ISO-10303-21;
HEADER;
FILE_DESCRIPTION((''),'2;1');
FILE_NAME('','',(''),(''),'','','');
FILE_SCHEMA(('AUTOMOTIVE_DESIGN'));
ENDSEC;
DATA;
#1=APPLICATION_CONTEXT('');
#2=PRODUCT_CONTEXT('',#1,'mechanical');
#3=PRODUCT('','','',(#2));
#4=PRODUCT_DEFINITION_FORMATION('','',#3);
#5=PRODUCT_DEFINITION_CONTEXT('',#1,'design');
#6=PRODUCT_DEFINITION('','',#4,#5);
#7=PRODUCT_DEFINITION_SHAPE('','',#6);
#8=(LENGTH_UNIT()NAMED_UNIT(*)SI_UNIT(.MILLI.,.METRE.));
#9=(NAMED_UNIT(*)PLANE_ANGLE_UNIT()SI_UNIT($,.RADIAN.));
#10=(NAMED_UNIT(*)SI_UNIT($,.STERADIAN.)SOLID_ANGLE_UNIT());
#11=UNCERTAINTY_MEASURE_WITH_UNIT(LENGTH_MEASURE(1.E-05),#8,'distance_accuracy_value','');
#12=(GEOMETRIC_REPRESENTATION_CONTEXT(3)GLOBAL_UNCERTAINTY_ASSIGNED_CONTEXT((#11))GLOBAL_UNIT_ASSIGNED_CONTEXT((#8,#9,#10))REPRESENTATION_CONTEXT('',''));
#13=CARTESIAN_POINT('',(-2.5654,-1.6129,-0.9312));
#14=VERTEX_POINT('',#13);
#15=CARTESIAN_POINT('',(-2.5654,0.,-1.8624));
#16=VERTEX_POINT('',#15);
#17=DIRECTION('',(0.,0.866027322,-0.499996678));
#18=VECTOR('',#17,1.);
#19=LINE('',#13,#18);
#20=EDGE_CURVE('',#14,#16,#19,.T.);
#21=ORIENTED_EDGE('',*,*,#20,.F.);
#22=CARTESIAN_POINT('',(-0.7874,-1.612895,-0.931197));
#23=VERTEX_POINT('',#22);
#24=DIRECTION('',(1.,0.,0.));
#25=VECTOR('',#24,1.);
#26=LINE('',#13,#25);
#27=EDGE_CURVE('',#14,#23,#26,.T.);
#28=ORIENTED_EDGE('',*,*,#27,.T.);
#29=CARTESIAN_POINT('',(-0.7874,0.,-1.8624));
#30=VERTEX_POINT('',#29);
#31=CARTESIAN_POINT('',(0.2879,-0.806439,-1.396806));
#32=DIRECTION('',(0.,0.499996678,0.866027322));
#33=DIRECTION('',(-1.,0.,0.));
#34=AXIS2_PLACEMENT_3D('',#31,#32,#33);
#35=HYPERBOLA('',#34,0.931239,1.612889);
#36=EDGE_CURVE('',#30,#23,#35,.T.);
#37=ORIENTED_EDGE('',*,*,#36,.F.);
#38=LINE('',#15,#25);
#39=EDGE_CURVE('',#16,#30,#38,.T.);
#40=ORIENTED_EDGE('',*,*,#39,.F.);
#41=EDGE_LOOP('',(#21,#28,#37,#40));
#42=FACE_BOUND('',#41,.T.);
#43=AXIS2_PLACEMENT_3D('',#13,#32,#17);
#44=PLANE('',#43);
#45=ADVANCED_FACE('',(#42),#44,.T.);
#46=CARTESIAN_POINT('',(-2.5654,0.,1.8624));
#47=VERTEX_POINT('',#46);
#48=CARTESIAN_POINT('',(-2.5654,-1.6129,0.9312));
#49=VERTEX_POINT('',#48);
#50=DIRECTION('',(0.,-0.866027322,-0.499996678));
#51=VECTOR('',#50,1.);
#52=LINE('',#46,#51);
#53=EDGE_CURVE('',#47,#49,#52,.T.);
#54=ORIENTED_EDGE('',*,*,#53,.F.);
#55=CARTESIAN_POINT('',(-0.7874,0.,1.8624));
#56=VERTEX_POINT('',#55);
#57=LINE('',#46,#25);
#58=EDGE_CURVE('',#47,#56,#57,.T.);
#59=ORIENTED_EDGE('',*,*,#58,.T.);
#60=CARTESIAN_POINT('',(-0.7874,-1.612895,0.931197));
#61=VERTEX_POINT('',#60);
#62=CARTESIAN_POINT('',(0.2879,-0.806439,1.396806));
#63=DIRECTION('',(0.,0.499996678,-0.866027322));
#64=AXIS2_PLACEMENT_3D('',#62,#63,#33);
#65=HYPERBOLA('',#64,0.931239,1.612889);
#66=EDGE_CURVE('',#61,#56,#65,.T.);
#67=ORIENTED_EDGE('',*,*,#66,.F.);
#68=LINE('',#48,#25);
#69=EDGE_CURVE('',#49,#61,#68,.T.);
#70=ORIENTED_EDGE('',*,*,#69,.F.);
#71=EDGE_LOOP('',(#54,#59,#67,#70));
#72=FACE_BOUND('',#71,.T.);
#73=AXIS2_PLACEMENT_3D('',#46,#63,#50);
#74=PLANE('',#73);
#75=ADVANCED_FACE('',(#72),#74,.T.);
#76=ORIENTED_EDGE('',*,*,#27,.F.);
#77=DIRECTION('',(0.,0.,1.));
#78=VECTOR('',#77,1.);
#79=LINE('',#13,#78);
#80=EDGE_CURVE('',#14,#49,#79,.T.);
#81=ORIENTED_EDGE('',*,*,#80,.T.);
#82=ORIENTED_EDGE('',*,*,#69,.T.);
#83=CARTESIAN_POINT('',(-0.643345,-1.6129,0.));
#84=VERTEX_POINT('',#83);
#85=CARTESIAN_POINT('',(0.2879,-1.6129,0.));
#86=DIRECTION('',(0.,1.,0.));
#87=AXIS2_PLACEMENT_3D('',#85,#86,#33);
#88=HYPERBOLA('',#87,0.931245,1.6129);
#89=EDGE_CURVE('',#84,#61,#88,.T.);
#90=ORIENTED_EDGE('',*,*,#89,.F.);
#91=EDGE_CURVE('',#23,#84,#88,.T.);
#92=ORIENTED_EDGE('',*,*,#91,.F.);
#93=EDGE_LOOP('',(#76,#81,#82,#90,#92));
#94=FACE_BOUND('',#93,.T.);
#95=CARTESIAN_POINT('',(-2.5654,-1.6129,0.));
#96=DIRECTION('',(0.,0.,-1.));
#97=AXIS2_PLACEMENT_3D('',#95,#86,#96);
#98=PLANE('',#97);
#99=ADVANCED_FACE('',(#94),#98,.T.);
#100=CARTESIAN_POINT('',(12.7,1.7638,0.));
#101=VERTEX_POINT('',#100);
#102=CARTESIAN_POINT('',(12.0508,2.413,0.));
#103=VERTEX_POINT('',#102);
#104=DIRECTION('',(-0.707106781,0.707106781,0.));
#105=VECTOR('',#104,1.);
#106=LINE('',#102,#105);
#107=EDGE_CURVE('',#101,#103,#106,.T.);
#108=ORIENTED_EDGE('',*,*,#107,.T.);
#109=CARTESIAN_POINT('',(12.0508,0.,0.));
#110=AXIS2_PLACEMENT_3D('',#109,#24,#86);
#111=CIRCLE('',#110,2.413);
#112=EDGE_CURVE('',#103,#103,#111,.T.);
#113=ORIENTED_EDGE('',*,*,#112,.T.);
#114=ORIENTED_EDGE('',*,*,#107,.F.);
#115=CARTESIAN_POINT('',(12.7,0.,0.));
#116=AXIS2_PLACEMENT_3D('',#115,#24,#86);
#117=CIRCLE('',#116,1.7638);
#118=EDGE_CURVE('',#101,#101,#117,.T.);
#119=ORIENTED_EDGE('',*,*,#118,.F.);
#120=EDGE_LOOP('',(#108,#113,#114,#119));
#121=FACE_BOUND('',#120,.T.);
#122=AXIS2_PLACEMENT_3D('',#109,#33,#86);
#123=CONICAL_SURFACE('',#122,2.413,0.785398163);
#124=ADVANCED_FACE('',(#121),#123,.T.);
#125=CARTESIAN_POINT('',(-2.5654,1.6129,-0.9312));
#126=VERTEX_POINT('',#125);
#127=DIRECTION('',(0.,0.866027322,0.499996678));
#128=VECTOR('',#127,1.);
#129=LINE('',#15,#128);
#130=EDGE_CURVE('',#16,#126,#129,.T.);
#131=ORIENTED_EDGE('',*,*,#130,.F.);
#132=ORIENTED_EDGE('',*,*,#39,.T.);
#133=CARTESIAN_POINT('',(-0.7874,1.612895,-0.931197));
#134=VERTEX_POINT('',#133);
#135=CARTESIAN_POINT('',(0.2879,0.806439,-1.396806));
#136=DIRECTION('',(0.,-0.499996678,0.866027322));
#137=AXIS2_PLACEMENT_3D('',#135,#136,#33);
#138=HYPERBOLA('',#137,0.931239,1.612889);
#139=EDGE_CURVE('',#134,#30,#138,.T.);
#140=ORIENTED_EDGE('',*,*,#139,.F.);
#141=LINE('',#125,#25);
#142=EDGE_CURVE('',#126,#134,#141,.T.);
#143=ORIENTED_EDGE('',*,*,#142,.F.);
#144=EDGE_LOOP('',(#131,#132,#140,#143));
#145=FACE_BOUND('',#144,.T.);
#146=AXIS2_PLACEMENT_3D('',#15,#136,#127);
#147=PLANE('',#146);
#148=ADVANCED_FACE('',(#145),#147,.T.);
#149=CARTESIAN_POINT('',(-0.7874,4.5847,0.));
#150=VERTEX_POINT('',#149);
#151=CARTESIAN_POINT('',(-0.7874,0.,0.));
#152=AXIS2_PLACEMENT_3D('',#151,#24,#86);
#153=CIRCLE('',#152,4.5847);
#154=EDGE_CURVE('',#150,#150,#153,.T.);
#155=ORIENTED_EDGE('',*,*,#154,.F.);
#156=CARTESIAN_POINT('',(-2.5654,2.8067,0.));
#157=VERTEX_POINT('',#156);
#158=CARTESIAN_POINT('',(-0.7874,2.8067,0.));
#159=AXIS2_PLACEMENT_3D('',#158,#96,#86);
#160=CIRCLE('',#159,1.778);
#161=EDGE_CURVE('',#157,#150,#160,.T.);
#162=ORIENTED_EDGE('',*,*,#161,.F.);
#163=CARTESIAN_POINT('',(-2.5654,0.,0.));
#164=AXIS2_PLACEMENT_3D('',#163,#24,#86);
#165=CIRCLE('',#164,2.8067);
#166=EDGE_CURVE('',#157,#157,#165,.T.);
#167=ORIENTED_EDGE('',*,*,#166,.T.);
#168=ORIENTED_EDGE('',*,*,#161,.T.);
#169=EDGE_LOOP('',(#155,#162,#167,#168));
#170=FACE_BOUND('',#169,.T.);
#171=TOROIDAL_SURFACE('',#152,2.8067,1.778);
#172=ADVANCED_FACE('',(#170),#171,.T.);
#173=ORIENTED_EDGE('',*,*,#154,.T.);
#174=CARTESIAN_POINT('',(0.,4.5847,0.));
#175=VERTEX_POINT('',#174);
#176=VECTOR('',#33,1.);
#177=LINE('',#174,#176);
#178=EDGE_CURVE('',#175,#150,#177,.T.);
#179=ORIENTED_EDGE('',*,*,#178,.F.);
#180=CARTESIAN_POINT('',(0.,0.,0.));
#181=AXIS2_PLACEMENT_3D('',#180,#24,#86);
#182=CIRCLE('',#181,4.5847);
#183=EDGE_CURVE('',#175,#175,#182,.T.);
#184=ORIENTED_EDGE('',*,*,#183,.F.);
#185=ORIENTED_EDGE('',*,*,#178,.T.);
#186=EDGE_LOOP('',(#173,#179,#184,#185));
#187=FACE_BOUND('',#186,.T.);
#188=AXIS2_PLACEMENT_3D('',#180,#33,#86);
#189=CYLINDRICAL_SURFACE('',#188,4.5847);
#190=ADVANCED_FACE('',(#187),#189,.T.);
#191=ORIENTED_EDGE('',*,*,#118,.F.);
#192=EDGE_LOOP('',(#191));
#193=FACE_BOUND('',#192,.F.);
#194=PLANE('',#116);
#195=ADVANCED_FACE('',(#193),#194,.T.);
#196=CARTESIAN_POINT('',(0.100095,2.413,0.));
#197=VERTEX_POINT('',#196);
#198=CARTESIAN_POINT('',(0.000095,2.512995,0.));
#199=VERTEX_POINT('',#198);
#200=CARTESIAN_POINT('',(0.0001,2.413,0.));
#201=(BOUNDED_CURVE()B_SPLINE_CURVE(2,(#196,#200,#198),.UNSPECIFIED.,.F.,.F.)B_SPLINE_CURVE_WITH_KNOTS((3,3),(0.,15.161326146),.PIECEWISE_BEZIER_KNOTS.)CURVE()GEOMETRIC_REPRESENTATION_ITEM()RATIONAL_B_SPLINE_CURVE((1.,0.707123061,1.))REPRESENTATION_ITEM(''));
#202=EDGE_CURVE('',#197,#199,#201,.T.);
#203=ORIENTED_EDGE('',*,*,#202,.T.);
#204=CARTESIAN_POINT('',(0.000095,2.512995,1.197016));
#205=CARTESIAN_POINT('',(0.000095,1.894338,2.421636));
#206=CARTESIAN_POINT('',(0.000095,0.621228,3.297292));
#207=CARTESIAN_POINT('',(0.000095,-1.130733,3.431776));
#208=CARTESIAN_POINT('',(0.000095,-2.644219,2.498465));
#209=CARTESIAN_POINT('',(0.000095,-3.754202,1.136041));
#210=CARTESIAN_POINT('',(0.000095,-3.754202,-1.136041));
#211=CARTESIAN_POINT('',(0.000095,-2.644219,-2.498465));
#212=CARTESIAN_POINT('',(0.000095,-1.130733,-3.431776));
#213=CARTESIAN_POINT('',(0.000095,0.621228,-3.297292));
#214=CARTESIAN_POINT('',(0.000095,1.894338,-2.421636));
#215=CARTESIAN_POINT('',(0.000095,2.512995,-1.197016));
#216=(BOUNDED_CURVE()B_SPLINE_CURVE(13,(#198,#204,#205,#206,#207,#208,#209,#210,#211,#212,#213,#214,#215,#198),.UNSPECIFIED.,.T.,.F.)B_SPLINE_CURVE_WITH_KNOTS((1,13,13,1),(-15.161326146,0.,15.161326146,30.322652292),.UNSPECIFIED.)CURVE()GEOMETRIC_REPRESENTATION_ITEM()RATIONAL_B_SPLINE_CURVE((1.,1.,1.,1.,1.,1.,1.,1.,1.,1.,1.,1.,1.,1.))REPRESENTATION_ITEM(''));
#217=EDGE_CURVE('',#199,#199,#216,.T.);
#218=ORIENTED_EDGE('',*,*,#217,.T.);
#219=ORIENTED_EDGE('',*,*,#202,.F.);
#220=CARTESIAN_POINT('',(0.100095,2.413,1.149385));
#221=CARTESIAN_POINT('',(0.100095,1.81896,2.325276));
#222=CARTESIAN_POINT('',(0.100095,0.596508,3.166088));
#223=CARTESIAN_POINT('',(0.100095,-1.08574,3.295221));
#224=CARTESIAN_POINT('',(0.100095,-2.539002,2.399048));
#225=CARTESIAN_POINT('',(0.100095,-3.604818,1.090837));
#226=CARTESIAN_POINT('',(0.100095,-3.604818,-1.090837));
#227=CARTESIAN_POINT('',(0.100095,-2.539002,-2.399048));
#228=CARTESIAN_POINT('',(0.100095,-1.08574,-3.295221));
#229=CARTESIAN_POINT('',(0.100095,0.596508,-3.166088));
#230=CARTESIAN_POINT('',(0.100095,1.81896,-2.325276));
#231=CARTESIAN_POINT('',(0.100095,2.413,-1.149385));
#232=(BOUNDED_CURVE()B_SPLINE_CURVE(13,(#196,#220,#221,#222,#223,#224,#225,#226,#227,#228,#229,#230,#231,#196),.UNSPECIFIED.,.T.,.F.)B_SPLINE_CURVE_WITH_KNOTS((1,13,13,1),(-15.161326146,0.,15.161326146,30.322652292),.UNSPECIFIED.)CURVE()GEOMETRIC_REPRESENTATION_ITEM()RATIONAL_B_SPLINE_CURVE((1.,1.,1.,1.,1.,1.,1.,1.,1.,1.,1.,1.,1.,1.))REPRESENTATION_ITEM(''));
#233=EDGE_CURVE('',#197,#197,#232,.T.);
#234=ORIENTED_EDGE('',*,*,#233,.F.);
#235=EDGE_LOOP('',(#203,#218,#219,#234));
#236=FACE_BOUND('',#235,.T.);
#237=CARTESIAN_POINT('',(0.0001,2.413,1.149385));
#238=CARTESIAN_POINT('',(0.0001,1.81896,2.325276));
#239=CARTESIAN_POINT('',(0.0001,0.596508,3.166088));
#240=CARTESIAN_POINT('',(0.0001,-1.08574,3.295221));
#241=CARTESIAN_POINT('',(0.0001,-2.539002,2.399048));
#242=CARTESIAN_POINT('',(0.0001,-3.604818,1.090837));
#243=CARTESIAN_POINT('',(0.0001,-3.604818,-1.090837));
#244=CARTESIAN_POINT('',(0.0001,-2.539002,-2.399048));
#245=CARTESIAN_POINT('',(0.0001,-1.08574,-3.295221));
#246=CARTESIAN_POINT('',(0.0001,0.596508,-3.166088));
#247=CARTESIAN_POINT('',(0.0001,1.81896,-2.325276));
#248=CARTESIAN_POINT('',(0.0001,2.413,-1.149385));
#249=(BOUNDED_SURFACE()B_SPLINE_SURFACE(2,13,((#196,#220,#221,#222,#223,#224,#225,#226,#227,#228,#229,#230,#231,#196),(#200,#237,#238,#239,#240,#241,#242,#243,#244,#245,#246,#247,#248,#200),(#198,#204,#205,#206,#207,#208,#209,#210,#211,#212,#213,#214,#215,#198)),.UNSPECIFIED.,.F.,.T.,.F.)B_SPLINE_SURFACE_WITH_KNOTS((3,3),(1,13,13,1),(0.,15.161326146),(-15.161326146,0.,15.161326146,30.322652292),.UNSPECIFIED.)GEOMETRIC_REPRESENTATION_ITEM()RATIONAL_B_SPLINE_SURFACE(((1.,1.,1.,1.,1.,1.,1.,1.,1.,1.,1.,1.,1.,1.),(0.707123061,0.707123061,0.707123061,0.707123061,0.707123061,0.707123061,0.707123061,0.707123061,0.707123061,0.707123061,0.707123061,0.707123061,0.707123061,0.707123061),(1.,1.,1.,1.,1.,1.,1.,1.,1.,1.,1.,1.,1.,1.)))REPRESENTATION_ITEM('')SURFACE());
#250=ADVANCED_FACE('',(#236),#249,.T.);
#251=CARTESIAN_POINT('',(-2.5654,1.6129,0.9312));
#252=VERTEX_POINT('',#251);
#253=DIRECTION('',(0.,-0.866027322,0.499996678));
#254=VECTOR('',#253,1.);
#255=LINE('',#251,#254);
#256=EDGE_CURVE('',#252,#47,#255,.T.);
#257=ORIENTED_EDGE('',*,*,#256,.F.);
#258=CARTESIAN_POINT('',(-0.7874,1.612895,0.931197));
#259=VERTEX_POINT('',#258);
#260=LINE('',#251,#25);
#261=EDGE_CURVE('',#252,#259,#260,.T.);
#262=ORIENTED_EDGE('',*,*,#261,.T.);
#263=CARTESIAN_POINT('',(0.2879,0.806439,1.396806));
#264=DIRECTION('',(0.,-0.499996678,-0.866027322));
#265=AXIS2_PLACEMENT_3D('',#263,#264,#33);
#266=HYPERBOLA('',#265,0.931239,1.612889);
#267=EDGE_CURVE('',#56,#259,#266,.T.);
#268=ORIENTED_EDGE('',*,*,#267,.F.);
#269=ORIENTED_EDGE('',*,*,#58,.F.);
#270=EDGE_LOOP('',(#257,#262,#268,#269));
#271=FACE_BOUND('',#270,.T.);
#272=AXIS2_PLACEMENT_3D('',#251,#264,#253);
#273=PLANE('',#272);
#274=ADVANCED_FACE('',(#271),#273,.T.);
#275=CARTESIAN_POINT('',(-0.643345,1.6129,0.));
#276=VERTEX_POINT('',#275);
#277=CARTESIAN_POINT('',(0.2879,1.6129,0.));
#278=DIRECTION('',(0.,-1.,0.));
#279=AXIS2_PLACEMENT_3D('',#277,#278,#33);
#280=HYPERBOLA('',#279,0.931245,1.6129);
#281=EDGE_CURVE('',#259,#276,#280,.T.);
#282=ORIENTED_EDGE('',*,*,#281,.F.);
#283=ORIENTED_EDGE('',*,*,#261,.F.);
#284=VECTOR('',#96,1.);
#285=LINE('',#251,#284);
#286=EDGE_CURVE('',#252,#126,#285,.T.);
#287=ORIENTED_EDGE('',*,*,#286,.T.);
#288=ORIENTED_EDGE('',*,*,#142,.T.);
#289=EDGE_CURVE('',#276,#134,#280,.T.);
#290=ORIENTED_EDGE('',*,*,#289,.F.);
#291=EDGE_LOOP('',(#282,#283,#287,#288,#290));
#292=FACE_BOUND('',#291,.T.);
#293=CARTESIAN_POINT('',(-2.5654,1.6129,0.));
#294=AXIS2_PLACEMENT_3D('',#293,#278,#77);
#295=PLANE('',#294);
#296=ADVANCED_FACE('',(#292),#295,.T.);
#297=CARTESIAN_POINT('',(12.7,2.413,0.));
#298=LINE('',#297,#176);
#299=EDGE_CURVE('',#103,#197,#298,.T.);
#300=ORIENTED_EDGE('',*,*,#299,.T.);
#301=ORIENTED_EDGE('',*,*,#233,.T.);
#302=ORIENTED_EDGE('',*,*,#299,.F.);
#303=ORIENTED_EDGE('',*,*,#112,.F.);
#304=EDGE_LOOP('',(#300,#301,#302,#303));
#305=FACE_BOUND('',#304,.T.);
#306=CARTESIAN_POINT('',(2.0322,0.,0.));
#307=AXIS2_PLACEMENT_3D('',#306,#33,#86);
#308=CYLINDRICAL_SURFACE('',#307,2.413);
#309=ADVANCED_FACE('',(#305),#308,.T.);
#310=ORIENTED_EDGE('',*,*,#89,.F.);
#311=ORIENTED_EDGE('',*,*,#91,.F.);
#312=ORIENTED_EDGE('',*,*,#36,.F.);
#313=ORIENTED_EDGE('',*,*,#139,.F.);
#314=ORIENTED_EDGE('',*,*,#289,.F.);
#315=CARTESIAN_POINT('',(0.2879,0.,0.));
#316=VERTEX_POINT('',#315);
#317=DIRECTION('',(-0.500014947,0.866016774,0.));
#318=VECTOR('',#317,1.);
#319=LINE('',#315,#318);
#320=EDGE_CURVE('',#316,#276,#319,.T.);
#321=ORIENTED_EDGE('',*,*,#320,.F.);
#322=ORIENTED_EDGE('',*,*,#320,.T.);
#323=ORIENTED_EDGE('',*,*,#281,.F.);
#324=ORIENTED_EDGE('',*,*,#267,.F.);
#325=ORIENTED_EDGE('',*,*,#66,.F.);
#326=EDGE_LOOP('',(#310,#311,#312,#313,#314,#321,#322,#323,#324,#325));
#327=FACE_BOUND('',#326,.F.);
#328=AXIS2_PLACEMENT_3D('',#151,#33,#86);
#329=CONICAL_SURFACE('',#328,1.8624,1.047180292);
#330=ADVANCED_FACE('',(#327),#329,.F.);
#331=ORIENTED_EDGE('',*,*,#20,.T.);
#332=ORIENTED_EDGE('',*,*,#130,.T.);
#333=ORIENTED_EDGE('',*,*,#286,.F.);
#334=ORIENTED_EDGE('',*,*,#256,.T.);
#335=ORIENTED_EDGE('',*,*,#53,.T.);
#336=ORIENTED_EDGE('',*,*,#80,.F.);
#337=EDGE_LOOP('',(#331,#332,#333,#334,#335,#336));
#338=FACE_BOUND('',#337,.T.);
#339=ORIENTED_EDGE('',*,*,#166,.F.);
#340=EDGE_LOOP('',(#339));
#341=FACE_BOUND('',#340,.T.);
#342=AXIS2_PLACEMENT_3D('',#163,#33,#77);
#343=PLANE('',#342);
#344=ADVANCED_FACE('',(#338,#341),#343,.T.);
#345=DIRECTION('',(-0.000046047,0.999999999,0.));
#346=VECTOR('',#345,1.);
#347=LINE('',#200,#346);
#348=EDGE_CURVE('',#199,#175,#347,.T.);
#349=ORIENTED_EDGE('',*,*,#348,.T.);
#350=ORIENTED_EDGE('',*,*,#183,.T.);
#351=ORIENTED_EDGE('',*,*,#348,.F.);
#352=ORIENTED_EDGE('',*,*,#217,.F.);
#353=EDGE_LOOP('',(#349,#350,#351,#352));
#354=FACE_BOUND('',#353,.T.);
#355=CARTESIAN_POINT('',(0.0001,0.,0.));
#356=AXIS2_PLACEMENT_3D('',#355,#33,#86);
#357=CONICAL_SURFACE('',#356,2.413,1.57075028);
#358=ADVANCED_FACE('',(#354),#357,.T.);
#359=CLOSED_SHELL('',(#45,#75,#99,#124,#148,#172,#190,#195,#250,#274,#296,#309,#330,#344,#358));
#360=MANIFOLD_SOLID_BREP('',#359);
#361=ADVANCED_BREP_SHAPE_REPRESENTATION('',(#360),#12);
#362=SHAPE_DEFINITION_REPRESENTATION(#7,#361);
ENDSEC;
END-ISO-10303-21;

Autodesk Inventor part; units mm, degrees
ref_plane "YZ Plane" through (0, 0, 0) normal (1, 0, 0) x (0, 1, 0)
ref_plane "XZ Plane" through (0, 0, 0) normal (0, 1, 0) x (-1, 0, 0)
sketch "Sketch1" plane through (0, 0, 0) normal (0, 0, 1) x (1, 0, 0)
  line L0 (0.2879, 0) -> (12.7, 0)
  line L1 (12.7, 0) -> (12.7, 2.413)
  line L2 (12.7, 2.413) -> (2.0322, 2.413)
  line L3 (2.0322, 2.413) -> (0.0001, 2.413)
  line L4 (0.0001, 2.413) -> (0, 2.413)
  line L5 (0, 2.413) -> (0, 4.5847)
  line L6 (0, 4.5847) -> (-2.5654, 4.5847)
  line L7 (-2.5654, 4.5847) -> (-2.5654, 1.8624)
  line L8 (-2.5654, 1.8624) -> (-0.7874, 1.8624)
  line L9 (-0.7874, 1.8624) -> (0.2879, 0)
  line L10 (-5.6185, 0) -> (15.7531, 0) projected
  line L11 (0, -0.9169) -> (0, 5.5016) projected
  line L12 (2.0322, 2.413) -> (0, 2.413) construction
  dimension "d1" = 10.6678
  dimension "d2" = 2.0321
  dimension "d3" = 2.5654
  dimension "d4" = 1.778
  dimension "d5" = 60
  dimension "d6" = 4.826
  dimension "d7" = 4.826
  dimension "d8" = 3.7248
  dimension "d9" = 9.1694
  dimension "d26" = 12.7
revolve "Body" add sketch "Sketch1" angle 360 about axis through (0.2879, 0, 0) along (1, 0, 0) contours L9 L11 L3 L2 L1 L0 | L9 L8 L7 L6 L5 L11
sketch "Sketch2" plane through (-2.5654, 0, 0) normal (-1, 0, 0) x (0, 0, 1)
  circle A0 centre (0, 0) radius 1.8624 projected
  line L0 (0, -6.4186) -> (0, 6.4186) projected
  line L1 (-6.4186, 0) -> (6.4186, 0) projected
  line L2 (1.8624, 0) -> (0.9312, -1.6129)
  line L3 (0.9312, -1.6129) -> (-0.9312, -1.6129)
  line L4 (-0.9312, -1.6129) -> (-1.8624, 0)
  line L5 (-1.8624, 0) -> (-0.9312, 1.6129)
  line L6 (-0.9312, 1.6129) -> (0.9312, 1.6129)
  line L7 (0.9312, 1.6129) -> (1.8624, 0)
extrude "Slot" add sketch "Sketch2" against normal up to next contours L7 A0 | A0 L2 | L6 L0 A0 | A0 L0 L3 | L0 L6 A0 | A0 L3 L0 | L4 A0 | A0 L5
fillet "Fillet1" radius 1.778 1 edges at (-2.5654, -4.5847, 0)
thread "Thread" size "10-24 UNC" class "2A" standard "ANSI Unified Screw Threads" length 10.6678
chamfer "Chamfer1" distance 0.6492 distance2 0.6492 1 edges at (12.7, -2.413, 0) measured on face at (12.7, -0.2852, -0.7521)
ref_plane "Work Plane1" through (29, 0, 0) normal (0, -1, 0) x (1, 0, 0)
fillet "Fillet2" radius 0.1 1 edges at (0.0001, -2.413, 0)
equation "\"d30\" = R"
equation "\"d17\" = RR"
equation "\"d13\" = GEL"
equation "\"d15\" = -0.5 * SPD + 0.5 * GD"
equation "\"d16\" = GUL"
equation "\"d1\" = GEL"
equation "\"d3\" = KOH"
equation "\"d4\" = INTI"
equation "\"d6\" = GD"
equation "\"d7\" = BDM"
equation "\"d8\" = 1.1547 * SW"
equation "\"d9\" = KOD"
equation "\"d26\" = NLG"
equation "\"GD\" = NND"
equation "\"NLG\" = 12.7"
equation "\"GEL\" = 10.6678"
equation "\"KOD\" = 9.1694"
equation "\"KOH\" = 2.5654"
equation "\"INTI\" = 1.778"
equation "\"GAL\" = 2.032"
equation "\"GUL\" = 0.64922"
equation "\"BDM\" = NND"
equation "\"SW\" = 3.2258"
equation "\"RR\" = 1.778"
equation "\"SPD\" = GD1"
equation "\"R\" = 0.1"
equation "\"KR\" = 5.4102"
equation "\"GD1\" = 3.52755"
equation "\"THREADDIA\" = 4.826"
equation "\"FAWI\" = 45deg"
equation "\"KOH1\" = 1.778"
equation "\"NND\" = 4.826"
equation "\"TOA\" = 30deg"
equation "\"E0\" = 1.155 * SW"
properties part number "Unbrako - 10 x 1/2" material "Steel, Mild"
